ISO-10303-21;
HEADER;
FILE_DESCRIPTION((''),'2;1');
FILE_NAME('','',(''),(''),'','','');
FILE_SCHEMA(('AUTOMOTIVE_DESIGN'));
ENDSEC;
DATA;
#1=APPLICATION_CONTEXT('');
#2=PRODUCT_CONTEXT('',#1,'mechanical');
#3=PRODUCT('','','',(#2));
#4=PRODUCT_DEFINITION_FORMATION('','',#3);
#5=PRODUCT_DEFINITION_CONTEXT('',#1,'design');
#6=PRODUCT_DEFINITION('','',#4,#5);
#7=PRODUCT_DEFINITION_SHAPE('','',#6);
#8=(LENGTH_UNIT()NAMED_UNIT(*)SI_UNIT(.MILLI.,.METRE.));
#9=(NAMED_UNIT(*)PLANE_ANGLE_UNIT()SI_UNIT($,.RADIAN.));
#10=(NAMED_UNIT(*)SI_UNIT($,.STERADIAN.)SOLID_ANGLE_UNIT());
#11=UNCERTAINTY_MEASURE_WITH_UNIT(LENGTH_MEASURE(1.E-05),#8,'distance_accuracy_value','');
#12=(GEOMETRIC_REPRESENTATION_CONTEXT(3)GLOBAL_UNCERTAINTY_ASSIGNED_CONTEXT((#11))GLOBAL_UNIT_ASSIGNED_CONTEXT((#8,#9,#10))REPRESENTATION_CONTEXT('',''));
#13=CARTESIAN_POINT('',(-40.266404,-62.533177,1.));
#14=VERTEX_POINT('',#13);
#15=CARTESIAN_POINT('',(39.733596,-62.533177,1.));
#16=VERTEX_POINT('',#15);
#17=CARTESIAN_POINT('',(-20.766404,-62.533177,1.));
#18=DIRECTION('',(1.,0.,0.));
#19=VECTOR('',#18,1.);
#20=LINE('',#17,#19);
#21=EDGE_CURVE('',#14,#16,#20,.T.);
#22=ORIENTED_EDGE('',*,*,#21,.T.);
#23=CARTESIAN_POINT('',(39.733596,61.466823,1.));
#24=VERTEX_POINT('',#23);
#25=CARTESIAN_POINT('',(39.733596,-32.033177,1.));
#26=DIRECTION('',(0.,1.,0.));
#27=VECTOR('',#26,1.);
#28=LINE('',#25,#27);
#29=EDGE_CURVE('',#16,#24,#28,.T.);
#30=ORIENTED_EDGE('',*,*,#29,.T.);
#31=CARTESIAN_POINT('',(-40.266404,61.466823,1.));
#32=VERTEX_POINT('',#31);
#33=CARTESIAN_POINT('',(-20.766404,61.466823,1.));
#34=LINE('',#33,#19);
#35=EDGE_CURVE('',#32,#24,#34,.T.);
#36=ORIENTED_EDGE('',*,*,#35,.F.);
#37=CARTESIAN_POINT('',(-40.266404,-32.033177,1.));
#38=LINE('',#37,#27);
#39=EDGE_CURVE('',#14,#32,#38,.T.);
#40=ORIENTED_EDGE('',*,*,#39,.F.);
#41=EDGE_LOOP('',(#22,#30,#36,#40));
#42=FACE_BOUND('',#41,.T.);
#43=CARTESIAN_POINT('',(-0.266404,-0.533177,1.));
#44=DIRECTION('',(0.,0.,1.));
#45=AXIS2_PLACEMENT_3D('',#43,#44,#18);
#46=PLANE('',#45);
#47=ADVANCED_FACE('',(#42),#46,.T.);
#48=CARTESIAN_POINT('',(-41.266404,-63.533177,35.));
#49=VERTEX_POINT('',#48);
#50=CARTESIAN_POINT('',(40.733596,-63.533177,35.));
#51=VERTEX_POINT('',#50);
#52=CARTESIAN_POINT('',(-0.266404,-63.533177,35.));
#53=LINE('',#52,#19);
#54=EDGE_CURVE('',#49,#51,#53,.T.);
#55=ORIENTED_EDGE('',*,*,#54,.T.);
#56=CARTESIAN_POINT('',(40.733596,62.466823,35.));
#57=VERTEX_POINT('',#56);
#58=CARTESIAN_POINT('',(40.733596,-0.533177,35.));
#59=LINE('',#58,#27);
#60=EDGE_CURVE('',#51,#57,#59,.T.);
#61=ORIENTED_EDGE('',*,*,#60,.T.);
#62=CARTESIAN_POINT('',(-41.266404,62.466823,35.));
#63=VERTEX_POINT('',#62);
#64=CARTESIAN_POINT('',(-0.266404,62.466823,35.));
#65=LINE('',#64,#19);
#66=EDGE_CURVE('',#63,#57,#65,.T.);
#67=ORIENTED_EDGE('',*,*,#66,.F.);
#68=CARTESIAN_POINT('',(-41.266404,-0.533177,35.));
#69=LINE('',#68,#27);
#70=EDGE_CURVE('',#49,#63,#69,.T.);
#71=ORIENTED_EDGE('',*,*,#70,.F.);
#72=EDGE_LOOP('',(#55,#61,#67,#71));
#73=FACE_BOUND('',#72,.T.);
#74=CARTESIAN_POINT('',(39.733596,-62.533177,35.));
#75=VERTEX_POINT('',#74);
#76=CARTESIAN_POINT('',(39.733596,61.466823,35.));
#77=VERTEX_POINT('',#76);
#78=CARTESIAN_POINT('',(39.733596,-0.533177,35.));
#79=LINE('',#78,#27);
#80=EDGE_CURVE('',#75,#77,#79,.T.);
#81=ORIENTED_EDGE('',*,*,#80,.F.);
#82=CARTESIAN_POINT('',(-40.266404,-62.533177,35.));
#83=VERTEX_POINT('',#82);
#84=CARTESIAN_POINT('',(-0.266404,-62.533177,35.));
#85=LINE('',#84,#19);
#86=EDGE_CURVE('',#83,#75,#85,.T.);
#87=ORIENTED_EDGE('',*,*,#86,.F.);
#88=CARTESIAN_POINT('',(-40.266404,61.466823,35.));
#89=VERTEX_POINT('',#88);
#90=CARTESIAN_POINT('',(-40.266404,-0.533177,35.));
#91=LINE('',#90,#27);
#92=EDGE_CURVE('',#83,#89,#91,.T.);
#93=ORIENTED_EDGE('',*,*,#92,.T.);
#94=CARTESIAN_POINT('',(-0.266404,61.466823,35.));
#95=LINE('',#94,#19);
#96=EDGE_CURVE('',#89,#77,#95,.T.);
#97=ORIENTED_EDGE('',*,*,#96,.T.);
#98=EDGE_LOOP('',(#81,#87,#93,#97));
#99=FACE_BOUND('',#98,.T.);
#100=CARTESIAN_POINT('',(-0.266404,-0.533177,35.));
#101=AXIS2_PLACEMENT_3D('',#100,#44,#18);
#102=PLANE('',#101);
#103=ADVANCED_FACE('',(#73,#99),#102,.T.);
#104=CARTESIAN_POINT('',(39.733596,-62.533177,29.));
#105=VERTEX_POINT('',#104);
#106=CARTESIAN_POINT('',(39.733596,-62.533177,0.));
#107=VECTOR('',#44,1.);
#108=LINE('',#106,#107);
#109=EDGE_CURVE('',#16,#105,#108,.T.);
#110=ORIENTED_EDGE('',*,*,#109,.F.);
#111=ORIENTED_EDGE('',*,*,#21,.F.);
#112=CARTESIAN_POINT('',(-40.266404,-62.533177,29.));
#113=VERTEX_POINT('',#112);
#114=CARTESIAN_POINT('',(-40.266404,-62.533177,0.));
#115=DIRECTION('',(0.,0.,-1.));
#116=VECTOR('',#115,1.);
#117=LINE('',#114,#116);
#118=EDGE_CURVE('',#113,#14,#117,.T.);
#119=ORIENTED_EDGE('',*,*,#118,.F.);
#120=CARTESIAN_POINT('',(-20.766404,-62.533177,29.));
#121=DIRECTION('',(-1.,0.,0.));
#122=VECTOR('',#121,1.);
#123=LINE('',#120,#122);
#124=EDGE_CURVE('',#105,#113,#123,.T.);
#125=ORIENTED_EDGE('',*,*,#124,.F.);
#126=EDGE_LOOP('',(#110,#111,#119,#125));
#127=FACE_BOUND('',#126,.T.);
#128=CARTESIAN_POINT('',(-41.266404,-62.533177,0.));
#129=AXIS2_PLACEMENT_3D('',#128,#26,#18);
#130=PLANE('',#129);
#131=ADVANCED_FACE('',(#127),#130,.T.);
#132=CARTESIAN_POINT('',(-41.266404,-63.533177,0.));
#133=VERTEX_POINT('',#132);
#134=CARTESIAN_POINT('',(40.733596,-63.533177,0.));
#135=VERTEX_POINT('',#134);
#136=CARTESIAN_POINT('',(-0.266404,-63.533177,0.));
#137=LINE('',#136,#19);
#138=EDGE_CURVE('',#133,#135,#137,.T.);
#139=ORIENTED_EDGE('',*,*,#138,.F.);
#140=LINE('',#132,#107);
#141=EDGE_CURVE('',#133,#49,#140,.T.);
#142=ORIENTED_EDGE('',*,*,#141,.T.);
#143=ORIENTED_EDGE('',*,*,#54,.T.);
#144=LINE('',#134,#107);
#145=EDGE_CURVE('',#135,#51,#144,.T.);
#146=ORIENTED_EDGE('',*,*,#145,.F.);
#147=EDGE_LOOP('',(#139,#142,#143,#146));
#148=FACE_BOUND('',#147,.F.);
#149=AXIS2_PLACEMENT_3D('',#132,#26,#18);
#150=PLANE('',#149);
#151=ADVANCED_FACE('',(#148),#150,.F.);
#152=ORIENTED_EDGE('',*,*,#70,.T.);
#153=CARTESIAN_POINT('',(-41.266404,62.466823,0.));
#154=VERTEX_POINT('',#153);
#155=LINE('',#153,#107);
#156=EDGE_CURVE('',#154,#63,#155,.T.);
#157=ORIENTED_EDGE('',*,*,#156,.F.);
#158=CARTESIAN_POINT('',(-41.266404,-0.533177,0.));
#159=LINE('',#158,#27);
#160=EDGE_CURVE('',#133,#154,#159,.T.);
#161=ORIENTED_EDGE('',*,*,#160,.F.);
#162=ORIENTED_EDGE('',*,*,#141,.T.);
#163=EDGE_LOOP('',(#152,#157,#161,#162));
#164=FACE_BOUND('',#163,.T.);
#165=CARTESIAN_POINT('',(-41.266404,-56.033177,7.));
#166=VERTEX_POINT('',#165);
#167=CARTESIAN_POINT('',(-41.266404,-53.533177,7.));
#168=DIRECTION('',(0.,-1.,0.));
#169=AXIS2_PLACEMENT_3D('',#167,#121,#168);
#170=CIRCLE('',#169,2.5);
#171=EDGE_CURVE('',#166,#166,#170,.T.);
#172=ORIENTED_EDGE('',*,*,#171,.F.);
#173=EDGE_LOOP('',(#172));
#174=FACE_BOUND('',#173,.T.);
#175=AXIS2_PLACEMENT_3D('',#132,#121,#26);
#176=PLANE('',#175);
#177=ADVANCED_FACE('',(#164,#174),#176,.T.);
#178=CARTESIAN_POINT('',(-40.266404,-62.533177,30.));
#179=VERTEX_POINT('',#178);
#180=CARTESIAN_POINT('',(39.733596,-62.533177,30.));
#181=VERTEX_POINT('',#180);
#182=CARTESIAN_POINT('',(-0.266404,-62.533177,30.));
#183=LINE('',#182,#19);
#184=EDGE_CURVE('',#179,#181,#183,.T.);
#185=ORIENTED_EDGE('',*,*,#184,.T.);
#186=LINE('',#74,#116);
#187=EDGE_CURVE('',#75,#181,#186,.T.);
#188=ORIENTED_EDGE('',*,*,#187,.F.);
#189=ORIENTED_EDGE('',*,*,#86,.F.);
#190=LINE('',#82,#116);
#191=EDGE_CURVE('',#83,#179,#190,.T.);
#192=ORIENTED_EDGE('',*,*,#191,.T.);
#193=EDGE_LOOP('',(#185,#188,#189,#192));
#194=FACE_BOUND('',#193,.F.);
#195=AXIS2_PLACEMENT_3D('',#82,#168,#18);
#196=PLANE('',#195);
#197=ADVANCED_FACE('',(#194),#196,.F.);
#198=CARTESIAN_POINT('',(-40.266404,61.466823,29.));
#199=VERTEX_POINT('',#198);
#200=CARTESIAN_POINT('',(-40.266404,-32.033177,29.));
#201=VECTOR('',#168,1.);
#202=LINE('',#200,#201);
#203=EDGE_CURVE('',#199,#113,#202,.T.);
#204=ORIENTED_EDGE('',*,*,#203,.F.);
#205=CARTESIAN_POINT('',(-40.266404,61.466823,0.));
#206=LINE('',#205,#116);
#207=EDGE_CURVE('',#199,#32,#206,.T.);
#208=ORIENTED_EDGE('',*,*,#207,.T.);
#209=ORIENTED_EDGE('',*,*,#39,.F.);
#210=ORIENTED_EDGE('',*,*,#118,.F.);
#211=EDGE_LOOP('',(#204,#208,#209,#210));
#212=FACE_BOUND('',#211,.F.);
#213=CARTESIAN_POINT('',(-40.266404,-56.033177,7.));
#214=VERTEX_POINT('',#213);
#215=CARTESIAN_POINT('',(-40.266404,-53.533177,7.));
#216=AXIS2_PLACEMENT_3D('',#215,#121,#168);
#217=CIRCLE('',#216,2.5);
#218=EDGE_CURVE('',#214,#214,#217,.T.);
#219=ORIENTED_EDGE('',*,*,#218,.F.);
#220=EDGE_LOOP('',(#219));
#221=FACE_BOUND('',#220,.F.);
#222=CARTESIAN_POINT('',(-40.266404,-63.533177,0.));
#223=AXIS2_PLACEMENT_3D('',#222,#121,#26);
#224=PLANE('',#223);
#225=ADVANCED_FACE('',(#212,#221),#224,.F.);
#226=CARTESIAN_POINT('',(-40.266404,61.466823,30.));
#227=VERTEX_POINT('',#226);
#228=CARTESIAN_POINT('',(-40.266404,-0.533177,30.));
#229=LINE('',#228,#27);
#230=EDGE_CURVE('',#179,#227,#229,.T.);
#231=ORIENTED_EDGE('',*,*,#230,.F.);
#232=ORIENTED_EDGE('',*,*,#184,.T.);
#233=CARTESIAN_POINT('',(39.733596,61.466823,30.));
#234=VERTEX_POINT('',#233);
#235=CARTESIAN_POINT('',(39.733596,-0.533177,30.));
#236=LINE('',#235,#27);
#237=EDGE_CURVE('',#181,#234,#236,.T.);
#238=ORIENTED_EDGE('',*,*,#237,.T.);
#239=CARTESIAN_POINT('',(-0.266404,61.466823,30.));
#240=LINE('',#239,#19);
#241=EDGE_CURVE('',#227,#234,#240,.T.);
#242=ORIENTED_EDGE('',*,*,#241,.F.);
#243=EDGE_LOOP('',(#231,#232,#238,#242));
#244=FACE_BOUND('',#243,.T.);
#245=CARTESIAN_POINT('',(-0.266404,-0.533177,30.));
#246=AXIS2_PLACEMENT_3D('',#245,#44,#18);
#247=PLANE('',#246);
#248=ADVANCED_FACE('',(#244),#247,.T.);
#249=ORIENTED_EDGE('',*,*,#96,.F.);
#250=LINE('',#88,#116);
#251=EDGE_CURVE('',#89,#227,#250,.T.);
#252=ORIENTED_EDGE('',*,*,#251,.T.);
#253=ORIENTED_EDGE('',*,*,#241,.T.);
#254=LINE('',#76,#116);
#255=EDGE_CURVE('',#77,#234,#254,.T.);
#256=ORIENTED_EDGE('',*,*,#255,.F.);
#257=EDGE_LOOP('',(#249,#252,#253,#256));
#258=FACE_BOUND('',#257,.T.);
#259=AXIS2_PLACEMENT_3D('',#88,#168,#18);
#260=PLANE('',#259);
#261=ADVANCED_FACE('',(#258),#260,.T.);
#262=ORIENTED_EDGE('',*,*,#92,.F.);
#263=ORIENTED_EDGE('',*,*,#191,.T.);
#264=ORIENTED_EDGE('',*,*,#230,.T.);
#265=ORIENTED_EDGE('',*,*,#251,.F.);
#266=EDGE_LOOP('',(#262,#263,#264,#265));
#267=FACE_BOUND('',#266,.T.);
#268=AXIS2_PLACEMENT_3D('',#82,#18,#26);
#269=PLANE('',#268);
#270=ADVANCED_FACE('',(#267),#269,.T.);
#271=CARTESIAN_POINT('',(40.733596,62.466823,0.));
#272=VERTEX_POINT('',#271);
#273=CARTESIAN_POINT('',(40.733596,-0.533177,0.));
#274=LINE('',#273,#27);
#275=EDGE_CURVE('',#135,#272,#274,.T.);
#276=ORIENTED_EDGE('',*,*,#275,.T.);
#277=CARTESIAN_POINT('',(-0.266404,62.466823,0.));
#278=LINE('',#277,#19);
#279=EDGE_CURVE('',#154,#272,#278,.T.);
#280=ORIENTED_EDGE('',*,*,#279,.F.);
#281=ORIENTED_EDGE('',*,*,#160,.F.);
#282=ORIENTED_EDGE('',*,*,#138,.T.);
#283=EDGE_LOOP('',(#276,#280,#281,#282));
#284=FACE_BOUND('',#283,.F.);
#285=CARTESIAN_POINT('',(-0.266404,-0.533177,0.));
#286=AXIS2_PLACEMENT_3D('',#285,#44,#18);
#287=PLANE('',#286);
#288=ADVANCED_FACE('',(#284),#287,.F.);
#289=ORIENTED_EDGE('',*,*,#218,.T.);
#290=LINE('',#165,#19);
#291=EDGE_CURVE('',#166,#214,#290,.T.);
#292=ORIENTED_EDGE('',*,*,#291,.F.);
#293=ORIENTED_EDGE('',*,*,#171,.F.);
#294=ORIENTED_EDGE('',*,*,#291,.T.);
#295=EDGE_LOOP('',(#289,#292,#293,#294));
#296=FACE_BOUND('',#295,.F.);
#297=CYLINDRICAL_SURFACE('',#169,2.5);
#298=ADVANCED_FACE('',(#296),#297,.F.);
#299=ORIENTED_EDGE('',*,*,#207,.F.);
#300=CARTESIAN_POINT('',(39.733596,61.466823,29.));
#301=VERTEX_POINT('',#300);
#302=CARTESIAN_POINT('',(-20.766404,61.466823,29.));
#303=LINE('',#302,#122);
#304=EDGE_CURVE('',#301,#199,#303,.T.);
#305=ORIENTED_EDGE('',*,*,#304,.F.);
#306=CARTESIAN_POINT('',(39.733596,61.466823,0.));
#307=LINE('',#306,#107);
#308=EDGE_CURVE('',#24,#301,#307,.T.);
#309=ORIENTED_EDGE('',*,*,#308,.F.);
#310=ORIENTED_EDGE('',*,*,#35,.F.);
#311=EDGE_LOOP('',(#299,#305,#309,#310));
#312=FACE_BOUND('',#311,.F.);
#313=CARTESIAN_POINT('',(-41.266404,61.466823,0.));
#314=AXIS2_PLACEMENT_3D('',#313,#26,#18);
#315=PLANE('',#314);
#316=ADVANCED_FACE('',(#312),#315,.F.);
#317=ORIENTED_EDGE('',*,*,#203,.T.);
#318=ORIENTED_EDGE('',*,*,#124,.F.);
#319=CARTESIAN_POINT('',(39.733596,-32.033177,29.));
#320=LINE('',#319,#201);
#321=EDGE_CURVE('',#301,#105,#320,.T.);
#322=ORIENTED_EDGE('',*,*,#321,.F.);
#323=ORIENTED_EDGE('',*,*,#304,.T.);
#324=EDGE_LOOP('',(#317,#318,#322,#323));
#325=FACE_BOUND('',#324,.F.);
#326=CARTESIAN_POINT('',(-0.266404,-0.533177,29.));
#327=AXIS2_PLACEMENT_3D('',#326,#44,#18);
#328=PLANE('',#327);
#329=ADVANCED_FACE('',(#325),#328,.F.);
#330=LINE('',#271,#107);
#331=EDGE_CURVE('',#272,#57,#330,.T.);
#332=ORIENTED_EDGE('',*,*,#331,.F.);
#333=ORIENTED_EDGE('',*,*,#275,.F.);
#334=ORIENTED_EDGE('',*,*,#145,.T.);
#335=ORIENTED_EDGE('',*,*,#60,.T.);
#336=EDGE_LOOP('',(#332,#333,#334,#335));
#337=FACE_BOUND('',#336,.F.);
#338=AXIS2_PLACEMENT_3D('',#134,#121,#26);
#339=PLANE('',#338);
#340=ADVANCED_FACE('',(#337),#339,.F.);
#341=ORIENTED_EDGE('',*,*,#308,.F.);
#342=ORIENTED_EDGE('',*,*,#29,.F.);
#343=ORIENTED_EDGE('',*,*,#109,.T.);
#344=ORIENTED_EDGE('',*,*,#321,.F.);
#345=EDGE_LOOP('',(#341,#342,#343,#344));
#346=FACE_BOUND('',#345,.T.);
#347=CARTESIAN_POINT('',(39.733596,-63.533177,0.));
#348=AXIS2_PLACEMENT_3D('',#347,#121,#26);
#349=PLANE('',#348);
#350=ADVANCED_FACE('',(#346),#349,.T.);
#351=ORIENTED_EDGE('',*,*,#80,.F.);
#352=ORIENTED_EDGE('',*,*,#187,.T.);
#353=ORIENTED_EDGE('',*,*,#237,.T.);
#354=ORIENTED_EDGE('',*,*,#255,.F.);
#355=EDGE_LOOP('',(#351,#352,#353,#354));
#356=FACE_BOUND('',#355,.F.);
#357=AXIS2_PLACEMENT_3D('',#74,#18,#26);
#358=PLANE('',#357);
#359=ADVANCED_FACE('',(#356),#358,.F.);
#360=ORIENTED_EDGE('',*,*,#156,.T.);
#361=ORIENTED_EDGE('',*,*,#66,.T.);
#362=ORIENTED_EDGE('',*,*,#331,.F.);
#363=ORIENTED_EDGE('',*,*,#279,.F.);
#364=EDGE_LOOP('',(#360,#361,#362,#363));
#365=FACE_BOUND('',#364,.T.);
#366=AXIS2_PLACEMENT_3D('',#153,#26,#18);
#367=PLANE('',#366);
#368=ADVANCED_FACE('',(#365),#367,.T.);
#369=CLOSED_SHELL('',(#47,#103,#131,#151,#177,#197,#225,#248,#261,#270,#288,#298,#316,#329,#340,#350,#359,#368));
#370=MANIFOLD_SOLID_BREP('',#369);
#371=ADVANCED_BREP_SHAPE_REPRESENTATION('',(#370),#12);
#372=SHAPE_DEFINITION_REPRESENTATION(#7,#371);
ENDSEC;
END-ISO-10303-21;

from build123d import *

# Parameters (mm, degrees)
F0_W     = 82
F0_H     = 126
F1_DEPTH = 35
F2_W     = 80
F2_H     = 124
F3_DEPTH = 5
F4_DEPTH = 1
F5_T     = -1
F6_R     = 2.5
F7_DEPTH = 3


with BuildPart() as f1:
    # F0 (on Top) → F1 (new body)
    with BuildSketch(Plane.XY):
        with Locations((-0.2664038911, -0.5331769297)):
            Rectangle(F0_W, F0_H)
    extrude(amount=F1_DEPTH)

    # F2 (on face) → F3 (cut)
    with BuildSketch(Plane.XY.offset(35)):
        with Locations((-0.2664038911, -0.5331769297)):
            Rectangle(F2_W, F2_H)
    extrude(amount=-F3_DEPTH, mode=Mode.SUBTRACT)

    # F4 (add): a face of the model
    f4_faces = [f1.faces().sort_by_distance(p)[0] for p in [
        (-0.2664038911, -0.5331769297, 30),
    ]]
    extrude(f4_faces, amount=-F4_DEPTH)

    # F5 (hollow: no face is removed)
    offset(amount=F5_T, kind=Kind.INTERSECTION, mode=Mode.SUBTRACT)

    # F6 (on face) → F7 (cut)
    with BuildSketch(Plane(origin=(-41.2664038911, 0, 0), x_dir=(0, -1, 0), z_dir=(-1, 0, 0))):
        with Locations((53.5331769297, 7)):
            Circle(F6_R)
    extrude(amount=-F7_DEPTH, mode=Mode.SUBTRACT)


solid = f1.part
